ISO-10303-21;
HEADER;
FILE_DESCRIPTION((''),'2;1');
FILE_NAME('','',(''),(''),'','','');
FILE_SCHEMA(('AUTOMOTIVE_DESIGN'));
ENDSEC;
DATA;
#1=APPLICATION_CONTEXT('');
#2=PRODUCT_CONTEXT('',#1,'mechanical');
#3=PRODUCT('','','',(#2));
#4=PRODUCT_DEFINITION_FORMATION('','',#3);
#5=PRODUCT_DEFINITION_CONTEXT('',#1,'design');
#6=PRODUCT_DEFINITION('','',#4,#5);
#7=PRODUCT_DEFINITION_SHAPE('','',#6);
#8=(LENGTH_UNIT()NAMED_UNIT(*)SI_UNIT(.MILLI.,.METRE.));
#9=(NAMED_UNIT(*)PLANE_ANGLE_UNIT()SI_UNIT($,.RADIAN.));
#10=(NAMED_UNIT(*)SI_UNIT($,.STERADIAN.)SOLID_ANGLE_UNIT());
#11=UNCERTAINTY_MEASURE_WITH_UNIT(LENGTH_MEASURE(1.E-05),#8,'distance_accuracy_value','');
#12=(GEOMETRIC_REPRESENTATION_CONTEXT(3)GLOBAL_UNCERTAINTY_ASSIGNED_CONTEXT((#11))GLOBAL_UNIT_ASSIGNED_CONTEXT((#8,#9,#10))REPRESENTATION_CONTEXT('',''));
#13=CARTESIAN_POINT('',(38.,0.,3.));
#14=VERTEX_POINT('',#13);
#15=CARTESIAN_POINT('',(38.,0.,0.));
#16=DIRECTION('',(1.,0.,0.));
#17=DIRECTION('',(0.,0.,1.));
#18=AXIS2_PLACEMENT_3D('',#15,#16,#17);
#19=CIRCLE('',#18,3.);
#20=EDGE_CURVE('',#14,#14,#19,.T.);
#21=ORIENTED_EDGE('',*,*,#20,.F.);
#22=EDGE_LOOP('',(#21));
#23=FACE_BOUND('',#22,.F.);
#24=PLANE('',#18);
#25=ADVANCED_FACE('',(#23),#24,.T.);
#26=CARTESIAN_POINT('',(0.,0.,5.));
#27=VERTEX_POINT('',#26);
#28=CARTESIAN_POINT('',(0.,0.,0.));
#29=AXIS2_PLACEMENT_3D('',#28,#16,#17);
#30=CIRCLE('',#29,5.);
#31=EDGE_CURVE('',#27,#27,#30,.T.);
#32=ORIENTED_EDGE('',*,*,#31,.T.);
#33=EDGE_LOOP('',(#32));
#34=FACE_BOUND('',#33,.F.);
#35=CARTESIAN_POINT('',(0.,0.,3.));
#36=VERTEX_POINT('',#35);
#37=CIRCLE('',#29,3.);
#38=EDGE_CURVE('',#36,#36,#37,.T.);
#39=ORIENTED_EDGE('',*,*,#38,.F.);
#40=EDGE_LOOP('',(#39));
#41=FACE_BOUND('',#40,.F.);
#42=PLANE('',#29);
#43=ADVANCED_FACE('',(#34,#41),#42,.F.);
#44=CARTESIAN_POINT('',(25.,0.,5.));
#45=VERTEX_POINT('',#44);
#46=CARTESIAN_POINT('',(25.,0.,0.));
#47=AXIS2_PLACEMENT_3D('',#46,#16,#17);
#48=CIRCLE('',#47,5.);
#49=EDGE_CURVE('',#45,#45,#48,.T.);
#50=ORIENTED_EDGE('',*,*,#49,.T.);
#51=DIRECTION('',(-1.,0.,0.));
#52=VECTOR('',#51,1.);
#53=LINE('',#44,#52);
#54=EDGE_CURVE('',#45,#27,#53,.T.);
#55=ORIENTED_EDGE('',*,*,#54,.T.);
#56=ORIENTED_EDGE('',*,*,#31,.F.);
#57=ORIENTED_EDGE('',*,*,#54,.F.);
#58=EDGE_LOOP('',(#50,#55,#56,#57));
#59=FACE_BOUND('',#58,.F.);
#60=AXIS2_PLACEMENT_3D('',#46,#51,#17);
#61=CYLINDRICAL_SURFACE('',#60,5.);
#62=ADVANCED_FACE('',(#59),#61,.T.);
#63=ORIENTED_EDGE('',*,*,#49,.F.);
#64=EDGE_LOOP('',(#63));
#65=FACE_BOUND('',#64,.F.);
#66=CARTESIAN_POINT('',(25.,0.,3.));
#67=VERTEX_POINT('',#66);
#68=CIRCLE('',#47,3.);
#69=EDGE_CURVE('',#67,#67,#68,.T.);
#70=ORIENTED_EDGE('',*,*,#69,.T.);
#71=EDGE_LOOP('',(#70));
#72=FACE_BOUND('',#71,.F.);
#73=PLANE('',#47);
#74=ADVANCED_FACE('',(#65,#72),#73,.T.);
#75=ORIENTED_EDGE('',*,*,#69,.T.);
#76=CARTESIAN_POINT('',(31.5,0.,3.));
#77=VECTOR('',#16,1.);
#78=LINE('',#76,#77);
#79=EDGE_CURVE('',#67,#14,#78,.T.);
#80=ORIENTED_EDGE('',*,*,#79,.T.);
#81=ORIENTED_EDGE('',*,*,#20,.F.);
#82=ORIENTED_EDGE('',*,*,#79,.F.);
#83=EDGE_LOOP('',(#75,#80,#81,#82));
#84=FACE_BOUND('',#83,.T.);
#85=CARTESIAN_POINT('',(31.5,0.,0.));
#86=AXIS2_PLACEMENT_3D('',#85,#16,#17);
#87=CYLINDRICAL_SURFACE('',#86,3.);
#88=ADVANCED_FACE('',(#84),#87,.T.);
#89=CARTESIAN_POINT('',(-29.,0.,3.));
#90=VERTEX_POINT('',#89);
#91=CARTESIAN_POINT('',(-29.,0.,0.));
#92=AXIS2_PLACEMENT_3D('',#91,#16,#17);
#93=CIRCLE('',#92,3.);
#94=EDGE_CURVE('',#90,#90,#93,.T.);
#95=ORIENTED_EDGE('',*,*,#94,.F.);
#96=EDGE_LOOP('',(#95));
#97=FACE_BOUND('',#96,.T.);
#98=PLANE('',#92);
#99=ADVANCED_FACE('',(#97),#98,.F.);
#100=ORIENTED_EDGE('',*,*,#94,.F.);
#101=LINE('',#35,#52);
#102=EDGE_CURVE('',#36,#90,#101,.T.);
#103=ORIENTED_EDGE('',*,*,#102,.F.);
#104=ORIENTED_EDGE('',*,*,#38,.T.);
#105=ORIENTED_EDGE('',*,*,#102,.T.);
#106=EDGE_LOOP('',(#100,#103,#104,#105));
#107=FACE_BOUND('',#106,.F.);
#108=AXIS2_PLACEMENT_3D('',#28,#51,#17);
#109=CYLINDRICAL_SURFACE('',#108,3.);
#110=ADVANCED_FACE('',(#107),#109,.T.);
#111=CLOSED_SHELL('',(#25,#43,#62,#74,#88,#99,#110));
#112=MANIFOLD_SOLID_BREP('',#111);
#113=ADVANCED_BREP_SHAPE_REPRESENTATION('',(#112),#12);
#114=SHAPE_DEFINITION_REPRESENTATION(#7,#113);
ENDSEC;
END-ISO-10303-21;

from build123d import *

# Parameters (mm, degrees)
F0_W   = 23
F0_H   = 3
F0_W_2 = 6
F0_W_3 = 13


# Not quite as in the source:
# - a feature names something its author has since deleted; it is built from what else it names


with BuildPart() as f1:
    # F0 (on Front) → F1 (revolve)
    with BuildSketch(Plane.XZ):
        Polygon((25, 5), (0, 5), (0, 3), (0, 0), (25, 0), (25, 3), align=None)
        with Locations((-11.5, 1.5)):
            Rectangle(F0_W, F0_H)
        with Locations((-26, 1.5)):
            Rectangle(F0_W_2, F0_H)
        with Locations((31.5, 1.5)):
            Rectangle(F0_W_3, F0_H)
    revolve(axis=Axis((1, 0, 0), (1, 0, 0)))


solid = f1.part
